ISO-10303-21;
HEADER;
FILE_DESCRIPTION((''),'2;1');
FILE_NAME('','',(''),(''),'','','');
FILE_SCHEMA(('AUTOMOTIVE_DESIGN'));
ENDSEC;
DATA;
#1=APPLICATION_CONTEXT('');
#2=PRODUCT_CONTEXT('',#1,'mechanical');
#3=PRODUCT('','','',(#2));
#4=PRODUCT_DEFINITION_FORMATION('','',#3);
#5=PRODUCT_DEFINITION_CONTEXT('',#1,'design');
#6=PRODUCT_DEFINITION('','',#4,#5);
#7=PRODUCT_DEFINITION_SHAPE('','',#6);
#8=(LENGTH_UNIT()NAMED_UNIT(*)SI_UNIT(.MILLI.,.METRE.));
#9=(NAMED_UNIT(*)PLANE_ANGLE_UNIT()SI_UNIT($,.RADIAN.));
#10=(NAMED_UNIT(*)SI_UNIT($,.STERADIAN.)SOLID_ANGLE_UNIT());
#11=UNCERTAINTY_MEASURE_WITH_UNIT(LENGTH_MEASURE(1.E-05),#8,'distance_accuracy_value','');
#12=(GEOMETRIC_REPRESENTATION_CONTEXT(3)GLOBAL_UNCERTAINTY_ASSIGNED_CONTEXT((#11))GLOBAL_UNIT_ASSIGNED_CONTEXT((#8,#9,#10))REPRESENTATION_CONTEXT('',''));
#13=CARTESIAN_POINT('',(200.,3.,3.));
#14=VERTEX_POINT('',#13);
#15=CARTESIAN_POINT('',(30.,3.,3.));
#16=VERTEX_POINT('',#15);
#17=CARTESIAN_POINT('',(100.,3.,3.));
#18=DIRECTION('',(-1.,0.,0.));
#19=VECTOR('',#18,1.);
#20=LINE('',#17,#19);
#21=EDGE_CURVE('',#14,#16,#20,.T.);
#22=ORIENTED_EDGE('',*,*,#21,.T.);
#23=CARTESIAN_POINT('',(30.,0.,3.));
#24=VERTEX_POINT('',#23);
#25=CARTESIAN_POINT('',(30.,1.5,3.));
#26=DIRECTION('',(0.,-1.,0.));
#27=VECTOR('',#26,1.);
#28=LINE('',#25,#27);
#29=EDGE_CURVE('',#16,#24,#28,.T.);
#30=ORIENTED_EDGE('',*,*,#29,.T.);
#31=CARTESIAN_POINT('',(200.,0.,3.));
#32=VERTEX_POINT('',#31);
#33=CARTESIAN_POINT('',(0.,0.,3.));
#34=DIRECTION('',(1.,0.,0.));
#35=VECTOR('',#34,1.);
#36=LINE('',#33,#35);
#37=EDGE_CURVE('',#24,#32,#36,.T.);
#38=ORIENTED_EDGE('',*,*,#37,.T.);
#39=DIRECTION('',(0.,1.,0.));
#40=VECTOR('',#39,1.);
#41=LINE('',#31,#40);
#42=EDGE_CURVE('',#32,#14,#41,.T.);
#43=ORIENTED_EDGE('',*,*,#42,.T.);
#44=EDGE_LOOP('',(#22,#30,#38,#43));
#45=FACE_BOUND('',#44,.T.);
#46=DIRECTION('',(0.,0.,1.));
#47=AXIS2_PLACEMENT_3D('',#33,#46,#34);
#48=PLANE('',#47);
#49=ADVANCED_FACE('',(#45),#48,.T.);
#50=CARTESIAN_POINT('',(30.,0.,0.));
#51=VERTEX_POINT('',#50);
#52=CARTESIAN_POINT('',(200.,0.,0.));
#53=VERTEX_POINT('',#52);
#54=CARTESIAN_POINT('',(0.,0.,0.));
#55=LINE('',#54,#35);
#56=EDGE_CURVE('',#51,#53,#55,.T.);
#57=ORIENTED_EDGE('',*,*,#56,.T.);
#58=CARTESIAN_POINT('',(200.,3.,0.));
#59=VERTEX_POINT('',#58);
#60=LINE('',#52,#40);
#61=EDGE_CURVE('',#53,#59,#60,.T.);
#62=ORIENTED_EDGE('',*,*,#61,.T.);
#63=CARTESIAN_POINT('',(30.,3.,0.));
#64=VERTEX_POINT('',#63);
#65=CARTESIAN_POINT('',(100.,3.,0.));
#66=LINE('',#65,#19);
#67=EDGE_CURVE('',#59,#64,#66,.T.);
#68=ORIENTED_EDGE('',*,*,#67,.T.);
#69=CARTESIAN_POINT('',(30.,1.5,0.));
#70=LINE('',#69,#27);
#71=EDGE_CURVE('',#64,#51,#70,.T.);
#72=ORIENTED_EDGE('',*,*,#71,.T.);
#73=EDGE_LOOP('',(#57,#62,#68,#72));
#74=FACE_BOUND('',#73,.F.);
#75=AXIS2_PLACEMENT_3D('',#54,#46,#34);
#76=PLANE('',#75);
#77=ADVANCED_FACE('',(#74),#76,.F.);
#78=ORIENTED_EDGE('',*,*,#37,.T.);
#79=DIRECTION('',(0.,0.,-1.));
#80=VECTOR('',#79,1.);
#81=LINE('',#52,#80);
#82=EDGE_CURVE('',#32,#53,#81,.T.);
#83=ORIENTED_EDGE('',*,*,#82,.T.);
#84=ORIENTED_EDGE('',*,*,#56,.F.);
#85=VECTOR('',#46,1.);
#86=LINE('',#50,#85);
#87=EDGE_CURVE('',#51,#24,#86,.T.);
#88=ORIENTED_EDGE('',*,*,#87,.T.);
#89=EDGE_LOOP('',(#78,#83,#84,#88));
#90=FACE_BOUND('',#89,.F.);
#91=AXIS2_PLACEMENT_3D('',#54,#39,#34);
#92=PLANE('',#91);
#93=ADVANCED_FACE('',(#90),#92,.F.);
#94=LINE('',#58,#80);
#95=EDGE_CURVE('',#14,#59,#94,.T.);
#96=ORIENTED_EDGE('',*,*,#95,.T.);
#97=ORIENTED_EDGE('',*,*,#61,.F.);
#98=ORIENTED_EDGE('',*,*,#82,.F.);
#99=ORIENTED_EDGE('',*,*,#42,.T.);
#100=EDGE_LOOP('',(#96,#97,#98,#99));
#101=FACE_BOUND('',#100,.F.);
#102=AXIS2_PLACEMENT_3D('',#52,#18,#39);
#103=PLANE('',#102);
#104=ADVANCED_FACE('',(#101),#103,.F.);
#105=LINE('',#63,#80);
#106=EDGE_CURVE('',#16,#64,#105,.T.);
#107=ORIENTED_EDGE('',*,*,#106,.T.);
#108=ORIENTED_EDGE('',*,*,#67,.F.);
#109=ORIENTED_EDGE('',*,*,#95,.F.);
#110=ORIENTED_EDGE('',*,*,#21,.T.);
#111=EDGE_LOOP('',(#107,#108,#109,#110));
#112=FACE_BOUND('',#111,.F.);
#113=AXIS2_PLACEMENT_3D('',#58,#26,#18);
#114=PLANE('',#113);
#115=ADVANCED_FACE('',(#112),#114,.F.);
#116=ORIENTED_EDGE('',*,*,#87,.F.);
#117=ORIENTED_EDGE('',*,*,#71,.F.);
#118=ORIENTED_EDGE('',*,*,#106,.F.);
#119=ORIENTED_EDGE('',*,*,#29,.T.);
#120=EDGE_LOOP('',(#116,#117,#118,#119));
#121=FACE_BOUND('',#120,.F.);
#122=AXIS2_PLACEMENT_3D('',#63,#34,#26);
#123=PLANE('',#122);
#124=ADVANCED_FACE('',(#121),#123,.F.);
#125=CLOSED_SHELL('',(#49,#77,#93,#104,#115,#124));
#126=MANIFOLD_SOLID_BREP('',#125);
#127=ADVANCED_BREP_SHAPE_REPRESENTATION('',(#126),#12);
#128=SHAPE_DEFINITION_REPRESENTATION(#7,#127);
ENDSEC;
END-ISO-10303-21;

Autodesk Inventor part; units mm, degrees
ref_plane "YZ Plane" through (0, 0, 0) normal (1, 0, 0) x (0, 1, 0)
ref_plane "XZ Plane" through (0, 0, 0) normal (0, 1, 0) x (-1, 0, 0)
ref_plane "XY Plane" through (0, 0, 0) normal (0, 0, 1) x (1, 0, 0)
sketch "Skizze1" plane through (0, 0, 0) normal (0, 0, 1) x (1, 0, 0)
  line L0 (0, 0) -> (200, 0)
  line L1 (200, 0) -> (200, 3)
  line L2 (200, 3) -> (0, 3)
  line L3 (0, 3) -> (0, 0)
  dimension "d0" = 200
  dimension "d1" = 3
extrude "Extrusion1" add sketch "Skizze1" along normal blind 3
sketch "Skizze2" plane through (200, 0, 0) normal (1, 0, 0) x (0, 0, -1)
  point P0 (0, 0)
sketch "Skizze3" plane through (0, 0, 0) normal (0, -1, 0) x (1, 0, 0)
  line L0 (0, 0) -> (200, 0) projected
  line L1 (200, 0) -> (53.164, 0)
  dimension "d4" = 146.836
move faces "Verschieben1" translate (30, 0, 0) faces at (0, 2, 1)
properties part number "blueStick"
